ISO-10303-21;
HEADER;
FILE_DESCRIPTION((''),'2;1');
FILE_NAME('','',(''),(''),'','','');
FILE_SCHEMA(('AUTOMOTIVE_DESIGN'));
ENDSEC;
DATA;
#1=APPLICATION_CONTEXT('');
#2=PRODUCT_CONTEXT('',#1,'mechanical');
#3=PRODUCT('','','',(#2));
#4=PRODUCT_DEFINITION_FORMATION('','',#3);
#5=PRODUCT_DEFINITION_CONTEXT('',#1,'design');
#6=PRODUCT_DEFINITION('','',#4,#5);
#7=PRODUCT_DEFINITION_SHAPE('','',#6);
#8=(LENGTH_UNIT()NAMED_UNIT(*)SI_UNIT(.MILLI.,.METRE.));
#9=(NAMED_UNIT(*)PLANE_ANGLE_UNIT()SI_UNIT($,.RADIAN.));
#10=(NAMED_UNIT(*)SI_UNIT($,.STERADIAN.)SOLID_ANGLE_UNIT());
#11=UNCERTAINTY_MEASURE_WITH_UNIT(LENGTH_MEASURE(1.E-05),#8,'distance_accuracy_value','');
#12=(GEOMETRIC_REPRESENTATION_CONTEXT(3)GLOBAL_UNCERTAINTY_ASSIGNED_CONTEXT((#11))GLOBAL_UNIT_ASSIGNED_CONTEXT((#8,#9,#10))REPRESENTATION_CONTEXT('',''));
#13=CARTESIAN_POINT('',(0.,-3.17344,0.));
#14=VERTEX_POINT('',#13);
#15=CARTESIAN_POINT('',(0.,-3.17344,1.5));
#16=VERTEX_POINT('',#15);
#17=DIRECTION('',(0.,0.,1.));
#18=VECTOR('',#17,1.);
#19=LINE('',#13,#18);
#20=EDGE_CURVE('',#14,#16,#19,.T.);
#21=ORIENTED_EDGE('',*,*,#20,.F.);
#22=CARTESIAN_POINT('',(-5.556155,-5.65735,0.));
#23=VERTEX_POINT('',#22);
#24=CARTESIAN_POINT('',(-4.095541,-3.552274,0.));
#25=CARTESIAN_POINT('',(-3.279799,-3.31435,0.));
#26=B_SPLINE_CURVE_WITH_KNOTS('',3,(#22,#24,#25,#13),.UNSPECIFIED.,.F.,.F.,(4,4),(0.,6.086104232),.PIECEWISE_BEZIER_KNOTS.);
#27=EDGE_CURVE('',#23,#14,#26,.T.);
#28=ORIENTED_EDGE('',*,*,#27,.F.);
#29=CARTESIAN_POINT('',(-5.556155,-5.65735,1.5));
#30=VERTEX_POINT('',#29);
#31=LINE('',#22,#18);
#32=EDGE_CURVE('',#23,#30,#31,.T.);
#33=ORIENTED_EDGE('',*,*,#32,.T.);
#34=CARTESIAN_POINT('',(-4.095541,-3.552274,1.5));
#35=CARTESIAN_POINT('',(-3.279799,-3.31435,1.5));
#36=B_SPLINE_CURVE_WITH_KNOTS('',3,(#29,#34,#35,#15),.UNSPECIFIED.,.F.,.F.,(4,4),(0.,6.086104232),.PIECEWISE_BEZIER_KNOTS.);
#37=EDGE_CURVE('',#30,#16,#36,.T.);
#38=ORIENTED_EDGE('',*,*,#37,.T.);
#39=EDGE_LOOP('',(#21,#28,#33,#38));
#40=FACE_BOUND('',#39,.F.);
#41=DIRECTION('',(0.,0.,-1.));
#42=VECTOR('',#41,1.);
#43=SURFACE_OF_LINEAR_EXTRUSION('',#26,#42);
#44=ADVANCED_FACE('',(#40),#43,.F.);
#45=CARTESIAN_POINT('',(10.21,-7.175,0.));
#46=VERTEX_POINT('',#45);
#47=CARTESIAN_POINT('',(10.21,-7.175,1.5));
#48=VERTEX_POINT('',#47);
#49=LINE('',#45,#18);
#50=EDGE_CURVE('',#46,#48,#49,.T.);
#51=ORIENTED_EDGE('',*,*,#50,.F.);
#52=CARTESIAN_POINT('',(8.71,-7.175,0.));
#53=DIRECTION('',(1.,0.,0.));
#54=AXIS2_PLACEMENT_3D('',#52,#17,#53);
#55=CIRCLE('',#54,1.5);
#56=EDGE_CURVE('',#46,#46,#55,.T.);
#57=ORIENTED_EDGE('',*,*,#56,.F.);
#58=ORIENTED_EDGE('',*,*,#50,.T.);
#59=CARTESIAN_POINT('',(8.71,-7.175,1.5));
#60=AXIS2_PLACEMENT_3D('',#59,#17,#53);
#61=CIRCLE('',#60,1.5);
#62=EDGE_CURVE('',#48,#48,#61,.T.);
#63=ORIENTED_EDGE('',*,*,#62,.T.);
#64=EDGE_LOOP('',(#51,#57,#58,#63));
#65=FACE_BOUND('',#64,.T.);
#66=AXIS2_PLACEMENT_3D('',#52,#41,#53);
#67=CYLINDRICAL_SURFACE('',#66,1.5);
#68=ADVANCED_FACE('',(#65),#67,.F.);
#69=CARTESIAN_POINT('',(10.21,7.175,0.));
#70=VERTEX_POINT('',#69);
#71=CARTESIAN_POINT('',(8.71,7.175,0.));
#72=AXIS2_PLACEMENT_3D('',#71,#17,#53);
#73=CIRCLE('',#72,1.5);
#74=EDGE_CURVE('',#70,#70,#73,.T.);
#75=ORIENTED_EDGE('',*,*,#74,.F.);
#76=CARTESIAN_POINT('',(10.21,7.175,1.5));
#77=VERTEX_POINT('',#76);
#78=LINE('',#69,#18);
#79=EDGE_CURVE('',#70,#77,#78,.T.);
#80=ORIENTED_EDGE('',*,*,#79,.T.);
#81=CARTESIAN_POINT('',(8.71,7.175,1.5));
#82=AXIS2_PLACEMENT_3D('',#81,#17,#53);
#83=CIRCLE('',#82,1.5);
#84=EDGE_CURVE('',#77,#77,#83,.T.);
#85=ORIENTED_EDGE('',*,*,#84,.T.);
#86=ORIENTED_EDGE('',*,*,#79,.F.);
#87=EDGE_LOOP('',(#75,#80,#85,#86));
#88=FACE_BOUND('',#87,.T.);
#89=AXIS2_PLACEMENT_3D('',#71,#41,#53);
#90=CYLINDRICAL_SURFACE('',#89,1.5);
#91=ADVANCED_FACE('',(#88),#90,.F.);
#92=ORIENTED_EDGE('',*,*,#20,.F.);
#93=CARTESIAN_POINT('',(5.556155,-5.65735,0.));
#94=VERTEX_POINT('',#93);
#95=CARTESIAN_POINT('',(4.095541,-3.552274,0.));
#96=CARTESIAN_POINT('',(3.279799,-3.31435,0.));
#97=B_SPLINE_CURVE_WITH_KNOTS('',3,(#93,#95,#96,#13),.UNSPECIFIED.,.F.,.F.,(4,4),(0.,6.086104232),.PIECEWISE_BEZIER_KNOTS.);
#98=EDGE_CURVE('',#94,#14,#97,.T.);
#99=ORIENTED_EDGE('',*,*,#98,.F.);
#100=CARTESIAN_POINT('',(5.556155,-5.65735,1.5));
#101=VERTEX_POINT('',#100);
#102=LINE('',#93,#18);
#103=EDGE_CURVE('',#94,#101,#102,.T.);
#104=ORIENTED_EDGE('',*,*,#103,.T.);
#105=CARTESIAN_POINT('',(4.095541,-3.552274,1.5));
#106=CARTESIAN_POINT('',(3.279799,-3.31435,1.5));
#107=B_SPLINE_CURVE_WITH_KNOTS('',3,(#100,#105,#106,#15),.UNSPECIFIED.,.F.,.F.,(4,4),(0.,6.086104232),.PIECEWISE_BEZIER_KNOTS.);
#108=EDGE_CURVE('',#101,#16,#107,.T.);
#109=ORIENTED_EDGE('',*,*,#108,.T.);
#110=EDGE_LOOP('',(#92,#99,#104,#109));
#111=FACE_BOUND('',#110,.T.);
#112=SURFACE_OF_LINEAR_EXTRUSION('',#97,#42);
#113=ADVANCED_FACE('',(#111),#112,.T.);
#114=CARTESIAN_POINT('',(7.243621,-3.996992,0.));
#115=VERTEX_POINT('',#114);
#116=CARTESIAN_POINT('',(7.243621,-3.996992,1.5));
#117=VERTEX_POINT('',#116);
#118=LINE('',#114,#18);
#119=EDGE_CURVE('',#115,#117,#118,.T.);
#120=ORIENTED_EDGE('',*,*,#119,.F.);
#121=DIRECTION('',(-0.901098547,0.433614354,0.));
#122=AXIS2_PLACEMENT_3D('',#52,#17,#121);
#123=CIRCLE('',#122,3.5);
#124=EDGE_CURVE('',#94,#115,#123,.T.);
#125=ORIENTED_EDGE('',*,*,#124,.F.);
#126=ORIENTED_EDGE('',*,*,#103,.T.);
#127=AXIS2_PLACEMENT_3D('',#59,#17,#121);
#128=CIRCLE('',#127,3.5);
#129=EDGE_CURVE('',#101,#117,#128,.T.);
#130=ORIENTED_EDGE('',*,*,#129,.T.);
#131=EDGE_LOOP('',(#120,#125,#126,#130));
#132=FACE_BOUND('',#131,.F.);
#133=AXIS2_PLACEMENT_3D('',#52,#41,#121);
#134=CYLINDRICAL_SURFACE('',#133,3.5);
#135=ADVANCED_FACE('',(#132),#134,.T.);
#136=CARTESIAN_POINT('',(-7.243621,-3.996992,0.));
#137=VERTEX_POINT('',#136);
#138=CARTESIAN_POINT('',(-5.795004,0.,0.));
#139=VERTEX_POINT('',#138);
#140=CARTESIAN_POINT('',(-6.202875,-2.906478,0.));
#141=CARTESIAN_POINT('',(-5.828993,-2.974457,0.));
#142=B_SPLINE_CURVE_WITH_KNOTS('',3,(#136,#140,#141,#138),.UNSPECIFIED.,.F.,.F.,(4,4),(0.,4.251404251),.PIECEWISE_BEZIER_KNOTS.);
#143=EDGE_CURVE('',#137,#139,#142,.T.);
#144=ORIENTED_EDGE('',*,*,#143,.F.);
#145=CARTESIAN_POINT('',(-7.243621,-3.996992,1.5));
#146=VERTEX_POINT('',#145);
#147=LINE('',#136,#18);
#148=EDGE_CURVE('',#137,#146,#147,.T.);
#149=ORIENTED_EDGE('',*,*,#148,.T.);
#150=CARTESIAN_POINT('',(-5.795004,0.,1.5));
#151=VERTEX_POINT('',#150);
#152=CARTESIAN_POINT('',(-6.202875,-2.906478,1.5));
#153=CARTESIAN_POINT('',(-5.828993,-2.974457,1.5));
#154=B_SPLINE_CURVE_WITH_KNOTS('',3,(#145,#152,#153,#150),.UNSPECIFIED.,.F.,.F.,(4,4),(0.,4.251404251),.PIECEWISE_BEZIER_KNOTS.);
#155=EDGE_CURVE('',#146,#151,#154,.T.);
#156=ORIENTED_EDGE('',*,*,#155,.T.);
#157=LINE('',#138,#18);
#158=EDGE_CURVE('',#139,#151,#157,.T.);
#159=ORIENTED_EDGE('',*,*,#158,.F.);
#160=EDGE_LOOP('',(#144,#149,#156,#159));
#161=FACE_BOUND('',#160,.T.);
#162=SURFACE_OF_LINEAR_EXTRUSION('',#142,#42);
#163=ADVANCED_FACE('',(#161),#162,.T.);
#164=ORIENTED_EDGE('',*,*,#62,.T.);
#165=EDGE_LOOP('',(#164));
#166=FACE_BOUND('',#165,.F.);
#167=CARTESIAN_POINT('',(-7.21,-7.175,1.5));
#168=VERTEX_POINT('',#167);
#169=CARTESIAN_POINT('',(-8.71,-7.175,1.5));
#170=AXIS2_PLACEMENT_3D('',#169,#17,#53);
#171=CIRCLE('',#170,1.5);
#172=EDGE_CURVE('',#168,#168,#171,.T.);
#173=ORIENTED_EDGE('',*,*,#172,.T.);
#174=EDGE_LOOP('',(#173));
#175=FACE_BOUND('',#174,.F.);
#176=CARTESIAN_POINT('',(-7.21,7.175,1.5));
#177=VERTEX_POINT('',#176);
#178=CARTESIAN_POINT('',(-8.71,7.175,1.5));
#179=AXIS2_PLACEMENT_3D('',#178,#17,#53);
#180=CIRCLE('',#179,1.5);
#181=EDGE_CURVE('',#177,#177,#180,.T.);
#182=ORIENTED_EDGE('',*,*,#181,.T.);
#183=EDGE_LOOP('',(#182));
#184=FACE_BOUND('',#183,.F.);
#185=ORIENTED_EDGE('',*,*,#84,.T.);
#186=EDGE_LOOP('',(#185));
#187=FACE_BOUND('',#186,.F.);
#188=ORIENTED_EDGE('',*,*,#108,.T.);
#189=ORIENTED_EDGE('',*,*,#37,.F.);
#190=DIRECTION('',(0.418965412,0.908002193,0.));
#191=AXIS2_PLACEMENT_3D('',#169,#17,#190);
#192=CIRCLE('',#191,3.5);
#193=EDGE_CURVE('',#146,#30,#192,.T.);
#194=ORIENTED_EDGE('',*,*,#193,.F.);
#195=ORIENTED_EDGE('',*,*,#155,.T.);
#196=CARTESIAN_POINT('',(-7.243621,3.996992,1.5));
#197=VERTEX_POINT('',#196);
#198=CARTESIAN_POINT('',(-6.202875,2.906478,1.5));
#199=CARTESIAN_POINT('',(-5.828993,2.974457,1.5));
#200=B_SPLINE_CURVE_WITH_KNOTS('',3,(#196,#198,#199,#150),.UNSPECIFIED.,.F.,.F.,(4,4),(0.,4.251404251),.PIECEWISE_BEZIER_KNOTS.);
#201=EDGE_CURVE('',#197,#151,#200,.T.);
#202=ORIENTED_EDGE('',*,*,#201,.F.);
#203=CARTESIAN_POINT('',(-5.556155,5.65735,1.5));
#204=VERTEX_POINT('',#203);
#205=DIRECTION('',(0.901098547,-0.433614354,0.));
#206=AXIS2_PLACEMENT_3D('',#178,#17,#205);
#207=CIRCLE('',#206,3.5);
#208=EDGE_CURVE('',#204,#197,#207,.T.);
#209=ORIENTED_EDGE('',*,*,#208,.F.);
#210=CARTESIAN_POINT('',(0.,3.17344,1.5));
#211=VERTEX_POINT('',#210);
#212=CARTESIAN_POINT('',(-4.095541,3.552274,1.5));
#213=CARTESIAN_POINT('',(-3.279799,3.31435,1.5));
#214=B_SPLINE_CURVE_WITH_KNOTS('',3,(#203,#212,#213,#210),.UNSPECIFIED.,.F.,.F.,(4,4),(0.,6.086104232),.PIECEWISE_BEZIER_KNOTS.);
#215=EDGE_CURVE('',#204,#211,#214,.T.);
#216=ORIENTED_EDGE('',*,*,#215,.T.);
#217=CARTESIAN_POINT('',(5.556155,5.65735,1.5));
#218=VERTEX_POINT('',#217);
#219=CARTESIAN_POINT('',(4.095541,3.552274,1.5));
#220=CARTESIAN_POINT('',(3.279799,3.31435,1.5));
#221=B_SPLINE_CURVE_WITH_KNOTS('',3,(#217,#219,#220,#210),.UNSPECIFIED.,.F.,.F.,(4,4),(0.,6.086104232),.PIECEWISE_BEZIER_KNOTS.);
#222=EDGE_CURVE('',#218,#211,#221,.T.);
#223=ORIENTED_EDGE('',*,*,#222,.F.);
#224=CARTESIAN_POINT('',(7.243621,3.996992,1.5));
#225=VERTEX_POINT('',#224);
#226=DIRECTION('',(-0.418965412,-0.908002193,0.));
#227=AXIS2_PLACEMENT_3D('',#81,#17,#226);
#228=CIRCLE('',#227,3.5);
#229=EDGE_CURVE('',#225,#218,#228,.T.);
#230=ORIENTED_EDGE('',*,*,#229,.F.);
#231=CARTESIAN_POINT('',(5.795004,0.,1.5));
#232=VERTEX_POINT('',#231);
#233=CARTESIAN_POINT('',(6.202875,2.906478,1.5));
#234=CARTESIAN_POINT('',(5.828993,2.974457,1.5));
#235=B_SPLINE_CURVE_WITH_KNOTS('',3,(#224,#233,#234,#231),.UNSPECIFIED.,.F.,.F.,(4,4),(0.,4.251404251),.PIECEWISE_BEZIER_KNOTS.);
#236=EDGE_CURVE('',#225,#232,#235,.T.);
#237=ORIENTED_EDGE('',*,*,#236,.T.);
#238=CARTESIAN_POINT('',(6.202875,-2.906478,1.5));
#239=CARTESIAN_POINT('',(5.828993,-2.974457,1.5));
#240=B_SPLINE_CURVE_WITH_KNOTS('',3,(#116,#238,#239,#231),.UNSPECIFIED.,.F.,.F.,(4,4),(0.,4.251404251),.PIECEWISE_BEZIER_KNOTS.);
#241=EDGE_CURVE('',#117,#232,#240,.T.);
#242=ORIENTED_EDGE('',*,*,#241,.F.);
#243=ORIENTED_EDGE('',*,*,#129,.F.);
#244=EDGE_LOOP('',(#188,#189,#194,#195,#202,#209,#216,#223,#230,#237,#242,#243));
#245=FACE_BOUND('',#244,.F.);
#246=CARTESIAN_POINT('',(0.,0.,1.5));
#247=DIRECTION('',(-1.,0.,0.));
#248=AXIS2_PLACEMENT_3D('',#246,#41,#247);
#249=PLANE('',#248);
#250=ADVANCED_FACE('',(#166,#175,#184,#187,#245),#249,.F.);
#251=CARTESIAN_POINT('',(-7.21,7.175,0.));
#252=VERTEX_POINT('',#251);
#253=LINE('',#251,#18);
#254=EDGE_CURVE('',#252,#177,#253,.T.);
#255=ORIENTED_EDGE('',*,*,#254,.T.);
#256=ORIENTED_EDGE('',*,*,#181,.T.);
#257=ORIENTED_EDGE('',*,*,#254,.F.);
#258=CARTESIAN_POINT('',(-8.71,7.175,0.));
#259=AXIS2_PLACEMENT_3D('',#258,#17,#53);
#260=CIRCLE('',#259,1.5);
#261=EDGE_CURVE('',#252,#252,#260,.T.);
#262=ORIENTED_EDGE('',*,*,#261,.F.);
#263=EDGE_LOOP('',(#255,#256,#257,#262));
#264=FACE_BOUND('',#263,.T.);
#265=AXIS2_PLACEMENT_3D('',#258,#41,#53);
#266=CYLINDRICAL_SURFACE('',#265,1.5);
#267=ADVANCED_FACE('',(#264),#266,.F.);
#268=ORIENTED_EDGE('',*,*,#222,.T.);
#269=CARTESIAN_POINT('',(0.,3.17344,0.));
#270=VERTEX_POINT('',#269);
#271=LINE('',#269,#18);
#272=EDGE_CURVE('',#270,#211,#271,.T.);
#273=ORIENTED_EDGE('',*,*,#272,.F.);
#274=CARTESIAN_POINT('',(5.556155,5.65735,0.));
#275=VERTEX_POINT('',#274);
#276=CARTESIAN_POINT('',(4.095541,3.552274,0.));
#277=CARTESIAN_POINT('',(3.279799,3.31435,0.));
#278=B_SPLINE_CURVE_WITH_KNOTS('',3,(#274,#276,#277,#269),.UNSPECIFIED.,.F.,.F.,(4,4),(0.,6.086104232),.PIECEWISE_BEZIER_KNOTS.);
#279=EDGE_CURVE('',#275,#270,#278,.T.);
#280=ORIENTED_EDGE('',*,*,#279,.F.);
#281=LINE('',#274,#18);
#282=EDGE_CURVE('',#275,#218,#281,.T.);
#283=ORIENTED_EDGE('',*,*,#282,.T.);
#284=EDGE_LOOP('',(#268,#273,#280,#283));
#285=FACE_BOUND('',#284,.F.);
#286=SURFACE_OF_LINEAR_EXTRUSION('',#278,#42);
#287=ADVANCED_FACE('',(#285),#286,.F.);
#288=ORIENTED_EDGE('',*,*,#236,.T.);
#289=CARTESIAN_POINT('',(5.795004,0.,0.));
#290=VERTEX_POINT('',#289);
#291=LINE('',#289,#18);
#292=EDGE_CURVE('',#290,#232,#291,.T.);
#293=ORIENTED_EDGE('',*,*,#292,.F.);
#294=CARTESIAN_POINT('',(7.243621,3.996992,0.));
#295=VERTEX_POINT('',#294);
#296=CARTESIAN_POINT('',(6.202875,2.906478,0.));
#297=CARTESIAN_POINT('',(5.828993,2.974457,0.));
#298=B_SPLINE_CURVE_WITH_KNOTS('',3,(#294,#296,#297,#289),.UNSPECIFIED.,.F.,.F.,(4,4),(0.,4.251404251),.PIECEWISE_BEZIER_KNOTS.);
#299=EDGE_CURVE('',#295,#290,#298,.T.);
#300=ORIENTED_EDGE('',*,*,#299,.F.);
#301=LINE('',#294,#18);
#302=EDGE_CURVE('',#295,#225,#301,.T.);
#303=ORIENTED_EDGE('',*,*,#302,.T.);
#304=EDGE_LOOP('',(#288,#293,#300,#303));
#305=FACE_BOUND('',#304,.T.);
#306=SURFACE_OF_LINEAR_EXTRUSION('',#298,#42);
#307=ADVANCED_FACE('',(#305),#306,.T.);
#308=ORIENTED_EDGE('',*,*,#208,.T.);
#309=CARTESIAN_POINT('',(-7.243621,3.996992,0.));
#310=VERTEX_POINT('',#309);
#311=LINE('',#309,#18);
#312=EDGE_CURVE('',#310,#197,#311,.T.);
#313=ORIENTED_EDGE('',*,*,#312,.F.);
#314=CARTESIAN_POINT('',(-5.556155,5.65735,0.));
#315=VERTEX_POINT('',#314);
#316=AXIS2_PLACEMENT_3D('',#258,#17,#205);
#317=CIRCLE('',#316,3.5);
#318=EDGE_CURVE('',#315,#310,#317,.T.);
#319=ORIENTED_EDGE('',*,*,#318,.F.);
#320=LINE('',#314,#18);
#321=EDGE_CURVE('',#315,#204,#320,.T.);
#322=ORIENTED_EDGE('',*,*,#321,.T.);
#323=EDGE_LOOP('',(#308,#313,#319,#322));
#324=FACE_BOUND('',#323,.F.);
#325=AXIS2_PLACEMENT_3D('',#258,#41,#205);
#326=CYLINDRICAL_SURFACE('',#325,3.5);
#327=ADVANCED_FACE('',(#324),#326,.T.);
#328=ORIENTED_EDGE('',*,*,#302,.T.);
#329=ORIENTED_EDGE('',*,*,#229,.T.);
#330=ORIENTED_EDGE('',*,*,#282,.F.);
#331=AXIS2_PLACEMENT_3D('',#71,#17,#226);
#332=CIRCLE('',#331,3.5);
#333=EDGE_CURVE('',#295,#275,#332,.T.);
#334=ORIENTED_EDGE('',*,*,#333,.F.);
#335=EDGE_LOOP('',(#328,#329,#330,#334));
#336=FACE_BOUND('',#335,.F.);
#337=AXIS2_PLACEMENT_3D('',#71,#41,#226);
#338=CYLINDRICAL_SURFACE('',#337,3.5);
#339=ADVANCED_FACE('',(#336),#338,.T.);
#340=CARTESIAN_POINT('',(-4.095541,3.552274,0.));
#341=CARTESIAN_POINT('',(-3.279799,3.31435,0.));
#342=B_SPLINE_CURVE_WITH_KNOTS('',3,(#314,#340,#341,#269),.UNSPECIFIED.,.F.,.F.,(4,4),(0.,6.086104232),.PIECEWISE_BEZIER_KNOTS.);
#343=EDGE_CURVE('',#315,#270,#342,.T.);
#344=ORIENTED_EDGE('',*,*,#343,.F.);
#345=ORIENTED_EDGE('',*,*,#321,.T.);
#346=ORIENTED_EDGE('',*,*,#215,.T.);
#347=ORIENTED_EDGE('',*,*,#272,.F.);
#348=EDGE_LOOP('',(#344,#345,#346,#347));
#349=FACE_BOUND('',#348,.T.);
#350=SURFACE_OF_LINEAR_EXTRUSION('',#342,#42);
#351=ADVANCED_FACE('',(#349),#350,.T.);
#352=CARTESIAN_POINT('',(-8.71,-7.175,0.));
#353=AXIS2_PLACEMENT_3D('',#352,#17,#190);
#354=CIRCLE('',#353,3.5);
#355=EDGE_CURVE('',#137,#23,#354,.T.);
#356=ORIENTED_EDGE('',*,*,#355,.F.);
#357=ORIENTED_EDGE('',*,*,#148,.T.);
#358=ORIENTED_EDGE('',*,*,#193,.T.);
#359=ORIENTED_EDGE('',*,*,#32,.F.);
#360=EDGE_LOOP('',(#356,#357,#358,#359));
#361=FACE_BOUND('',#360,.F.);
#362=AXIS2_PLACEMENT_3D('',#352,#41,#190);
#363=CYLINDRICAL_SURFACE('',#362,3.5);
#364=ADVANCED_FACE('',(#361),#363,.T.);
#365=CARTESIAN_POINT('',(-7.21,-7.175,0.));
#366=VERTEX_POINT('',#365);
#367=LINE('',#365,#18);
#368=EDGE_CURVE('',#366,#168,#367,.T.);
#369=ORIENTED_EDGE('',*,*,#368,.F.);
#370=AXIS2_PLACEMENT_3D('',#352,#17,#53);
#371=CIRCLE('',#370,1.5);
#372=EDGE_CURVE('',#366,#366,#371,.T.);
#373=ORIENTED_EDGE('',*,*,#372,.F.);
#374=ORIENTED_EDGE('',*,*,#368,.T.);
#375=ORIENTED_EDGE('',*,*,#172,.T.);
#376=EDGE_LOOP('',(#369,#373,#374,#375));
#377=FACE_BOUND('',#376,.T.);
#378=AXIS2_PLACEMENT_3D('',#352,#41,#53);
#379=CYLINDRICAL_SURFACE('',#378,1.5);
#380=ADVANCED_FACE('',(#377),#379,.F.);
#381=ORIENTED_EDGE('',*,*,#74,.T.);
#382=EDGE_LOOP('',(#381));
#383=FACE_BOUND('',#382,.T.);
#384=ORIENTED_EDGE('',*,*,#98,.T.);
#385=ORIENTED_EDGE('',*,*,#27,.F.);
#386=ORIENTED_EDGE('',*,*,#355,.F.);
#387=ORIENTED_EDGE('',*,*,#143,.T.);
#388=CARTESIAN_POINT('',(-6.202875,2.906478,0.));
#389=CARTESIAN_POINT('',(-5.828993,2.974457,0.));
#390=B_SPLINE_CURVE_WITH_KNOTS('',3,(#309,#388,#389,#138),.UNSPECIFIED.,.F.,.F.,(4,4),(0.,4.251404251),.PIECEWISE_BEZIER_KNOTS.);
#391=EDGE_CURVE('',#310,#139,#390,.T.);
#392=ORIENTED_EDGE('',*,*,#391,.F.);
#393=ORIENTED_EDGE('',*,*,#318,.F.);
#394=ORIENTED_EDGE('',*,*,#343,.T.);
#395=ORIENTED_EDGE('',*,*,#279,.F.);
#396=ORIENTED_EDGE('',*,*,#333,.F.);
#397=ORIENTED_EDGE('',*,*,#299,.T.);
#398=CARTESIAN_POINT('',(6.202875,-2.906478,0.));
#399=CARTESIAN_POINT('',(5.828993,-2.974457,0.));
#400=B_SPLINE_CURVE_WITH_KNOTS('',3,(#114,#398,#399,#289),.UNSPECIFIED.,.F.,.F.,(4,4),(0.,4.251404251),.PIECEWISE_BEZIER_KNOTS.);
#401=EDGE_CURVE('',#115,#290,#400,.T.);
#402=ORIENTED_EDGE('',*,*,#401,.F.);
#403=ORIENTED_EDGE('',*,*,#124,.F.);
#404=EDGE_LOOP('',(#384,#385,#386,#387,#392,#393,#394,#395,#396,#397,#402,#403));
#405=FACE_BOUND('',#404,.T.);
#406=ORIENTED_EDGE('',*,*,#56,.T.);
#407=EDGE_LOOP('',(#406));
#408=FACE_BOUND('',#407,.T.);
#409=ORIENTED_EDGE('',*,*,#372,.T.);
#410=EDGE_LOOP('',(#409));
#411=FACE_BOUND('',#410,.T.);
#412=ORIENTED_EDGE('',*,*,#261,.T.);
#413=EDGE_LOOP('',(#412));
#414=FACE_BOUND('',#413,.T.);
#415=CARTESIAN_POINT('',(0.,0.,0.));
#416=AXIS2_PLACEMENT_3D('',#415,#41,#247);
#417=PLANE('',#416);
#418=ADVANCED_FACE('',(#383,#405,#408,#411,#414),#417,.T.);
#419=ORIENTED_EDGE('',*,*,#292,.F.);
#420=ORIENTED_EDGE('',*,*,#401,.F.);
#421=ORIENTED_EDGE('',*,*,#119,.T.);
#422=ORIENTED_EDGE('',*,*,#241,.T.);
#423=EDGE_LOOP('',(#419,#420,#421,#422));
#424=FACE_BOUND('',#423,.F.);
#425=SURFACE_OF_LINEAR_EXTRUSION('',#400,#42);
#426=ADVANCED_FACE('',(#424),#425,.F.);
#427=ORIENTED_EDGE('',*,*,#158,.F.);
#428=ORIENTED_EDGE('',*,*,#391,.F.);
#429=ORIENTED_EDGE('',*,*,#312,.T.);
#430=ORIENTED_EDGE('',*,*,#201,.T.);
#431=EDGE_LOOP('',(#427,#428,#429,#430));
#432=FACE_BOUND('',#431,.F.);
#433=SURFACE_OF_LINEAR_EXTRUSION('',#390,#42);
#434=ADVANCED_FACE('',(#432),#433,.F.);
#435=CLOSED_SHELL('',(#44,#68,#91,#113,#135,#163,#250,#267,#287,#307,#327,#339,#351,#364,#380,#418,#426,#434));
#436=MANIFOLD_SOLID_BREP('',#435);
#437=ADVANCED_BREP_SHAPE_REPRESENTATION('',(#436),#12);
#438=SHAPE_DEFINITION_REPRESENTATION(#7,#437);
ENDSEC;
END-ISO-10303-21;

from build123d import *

# Parameters (mm, degrees)
F0_R     = 1.5
F1_DEPTH = 1.5


with BuildPart() as f1:
    # F0 (on Top) → F1 (new body)
    with BuildSketch(Plane.XY):
        with BuildLine():
            add(Edge.make_bspline(
                [(-5.5561550838, 5.6573497621), (-4.0955413133, 3.5522743128), (-3.2797986642, 3.3143495675), (0, 3.173440462)],
                knots=[0, 0, 0, 0, 6.0861042323, 6.0861042323, 6.0861042323, 6.0861042323], degree=3))
            ThreePointArc((-5.5561550838, 5.6573497621), (-11.1647533144, 9.6698318912), (-7.2436210565, 3.9969923231))
            add(Edge.make_bspline(
                [(-7.2436210565, 3.9969923231), (-6.2028751709, 2.9064782429), (-5.828993395, 2.9744568747), (-5.7950043119, 0)],
                knots=[0, 0, 0, 0, 4.2514042508, 4.2514042508, 4.2514042508, 4.2514042508], degree=3))
            add(Edge.make_bspline(
                [(-7.2436210565, -3.9969923231), (-6.2028751709, -2.9064782429), (-5.828993395, -2.9744568747), (-5.7950043119, 0)],
                knots=[0, 0, 0, 0, 4.2514042508, 4.2514042508, 4.2514042508, 4.2514042508], degree=3))
            ThreePointArc((-7.2436210565, -3.9969923231), (-11.1647533144, -9.6698318912), (-5.5561550838, -5.6573497621))
            add(Edge.make_bspline(
                [(-5.5561550838, -5.6573497621), (-4.0955413133, -3.5522743128), (-3.2797986642, -3.3143495675), (0, -3.173440462)],
                knots=[0, 0, 0, 0, 6.0861042323, 6.0861042323, 6.0861042323, 6.0861042323], degree=3))
            add(Edge.make_bspline(
                [(5.5561550838, -5.6573497621), (4.0955413133, -3.5522743128), (3.2797986642, -3.3143495675), (0, -3.173440462)],
                knots=[0, 0, 0, 0, 6.0861042323, 6.0861042323, 6.0861042323, 6.0861042323], degree=3))
            ThreePointArc((5.5561550838, -5.6573497621), (11.1647533144, -9.6698318912), (7.2436210565, -3.9969923231))
            add(Edge.make_bspline(
                [(7.2436210565, -3.9969923231), (6.2028751709, -2.9064782429), (5.828993395, -2.9744568747), (5.7950043119, 0)],
                knots=[0, 0, 0, 0, 4.2514042508, 4.2514042508, 4.2514042508, 4.2514042508], degree=3))
            add(Edge.make_bspline(
                [(7.2436210565, 3.9969923231), (6.2028751709, 2.9064782429), (5.828993395, 2.9744568747), (5.7950043119, 0)],
                knots=[0, 0, 0, 0, 4.2514042508, 4.2514042508, 4.2514042508, 4.2514042508], degree=3))
            ThreePointArc((7.2436210565, 3.9969923231), (11.1647533144, 9.6698318912), (5.5561550838, 5.6573497621))
            add(Edge.make_bspline(
                [(5.5561550838, 5.6573497621), (4.0955413133, 3.5522743128), (3.2797986642, 3.3143495675), (0, 3.173440462)],
                knots=[0, 0, 0, 0, 6.0861042323, 6.0861042323, 6.0861042323, 6.0861042323], degree=3))
        make_face()
        with Locations((-8.71, -7.175)):
            Circle(F0_R, mode=Mode.SUBTRACT)
        with Locations((8.71, -7.175)):
            Circle(F0_R, mode=Mode.SUBTRACT)
        with Locations((-8.71, 7.175)):
            Circle(F0_R, mode=Mode.SUBTRACT)
        with Locations((8.71, 7.175)):
            Circle(F0_R, mode=Mode.SUBTRACT)
    extrude(amount=F1_DEPTH)


solid = f1.part
